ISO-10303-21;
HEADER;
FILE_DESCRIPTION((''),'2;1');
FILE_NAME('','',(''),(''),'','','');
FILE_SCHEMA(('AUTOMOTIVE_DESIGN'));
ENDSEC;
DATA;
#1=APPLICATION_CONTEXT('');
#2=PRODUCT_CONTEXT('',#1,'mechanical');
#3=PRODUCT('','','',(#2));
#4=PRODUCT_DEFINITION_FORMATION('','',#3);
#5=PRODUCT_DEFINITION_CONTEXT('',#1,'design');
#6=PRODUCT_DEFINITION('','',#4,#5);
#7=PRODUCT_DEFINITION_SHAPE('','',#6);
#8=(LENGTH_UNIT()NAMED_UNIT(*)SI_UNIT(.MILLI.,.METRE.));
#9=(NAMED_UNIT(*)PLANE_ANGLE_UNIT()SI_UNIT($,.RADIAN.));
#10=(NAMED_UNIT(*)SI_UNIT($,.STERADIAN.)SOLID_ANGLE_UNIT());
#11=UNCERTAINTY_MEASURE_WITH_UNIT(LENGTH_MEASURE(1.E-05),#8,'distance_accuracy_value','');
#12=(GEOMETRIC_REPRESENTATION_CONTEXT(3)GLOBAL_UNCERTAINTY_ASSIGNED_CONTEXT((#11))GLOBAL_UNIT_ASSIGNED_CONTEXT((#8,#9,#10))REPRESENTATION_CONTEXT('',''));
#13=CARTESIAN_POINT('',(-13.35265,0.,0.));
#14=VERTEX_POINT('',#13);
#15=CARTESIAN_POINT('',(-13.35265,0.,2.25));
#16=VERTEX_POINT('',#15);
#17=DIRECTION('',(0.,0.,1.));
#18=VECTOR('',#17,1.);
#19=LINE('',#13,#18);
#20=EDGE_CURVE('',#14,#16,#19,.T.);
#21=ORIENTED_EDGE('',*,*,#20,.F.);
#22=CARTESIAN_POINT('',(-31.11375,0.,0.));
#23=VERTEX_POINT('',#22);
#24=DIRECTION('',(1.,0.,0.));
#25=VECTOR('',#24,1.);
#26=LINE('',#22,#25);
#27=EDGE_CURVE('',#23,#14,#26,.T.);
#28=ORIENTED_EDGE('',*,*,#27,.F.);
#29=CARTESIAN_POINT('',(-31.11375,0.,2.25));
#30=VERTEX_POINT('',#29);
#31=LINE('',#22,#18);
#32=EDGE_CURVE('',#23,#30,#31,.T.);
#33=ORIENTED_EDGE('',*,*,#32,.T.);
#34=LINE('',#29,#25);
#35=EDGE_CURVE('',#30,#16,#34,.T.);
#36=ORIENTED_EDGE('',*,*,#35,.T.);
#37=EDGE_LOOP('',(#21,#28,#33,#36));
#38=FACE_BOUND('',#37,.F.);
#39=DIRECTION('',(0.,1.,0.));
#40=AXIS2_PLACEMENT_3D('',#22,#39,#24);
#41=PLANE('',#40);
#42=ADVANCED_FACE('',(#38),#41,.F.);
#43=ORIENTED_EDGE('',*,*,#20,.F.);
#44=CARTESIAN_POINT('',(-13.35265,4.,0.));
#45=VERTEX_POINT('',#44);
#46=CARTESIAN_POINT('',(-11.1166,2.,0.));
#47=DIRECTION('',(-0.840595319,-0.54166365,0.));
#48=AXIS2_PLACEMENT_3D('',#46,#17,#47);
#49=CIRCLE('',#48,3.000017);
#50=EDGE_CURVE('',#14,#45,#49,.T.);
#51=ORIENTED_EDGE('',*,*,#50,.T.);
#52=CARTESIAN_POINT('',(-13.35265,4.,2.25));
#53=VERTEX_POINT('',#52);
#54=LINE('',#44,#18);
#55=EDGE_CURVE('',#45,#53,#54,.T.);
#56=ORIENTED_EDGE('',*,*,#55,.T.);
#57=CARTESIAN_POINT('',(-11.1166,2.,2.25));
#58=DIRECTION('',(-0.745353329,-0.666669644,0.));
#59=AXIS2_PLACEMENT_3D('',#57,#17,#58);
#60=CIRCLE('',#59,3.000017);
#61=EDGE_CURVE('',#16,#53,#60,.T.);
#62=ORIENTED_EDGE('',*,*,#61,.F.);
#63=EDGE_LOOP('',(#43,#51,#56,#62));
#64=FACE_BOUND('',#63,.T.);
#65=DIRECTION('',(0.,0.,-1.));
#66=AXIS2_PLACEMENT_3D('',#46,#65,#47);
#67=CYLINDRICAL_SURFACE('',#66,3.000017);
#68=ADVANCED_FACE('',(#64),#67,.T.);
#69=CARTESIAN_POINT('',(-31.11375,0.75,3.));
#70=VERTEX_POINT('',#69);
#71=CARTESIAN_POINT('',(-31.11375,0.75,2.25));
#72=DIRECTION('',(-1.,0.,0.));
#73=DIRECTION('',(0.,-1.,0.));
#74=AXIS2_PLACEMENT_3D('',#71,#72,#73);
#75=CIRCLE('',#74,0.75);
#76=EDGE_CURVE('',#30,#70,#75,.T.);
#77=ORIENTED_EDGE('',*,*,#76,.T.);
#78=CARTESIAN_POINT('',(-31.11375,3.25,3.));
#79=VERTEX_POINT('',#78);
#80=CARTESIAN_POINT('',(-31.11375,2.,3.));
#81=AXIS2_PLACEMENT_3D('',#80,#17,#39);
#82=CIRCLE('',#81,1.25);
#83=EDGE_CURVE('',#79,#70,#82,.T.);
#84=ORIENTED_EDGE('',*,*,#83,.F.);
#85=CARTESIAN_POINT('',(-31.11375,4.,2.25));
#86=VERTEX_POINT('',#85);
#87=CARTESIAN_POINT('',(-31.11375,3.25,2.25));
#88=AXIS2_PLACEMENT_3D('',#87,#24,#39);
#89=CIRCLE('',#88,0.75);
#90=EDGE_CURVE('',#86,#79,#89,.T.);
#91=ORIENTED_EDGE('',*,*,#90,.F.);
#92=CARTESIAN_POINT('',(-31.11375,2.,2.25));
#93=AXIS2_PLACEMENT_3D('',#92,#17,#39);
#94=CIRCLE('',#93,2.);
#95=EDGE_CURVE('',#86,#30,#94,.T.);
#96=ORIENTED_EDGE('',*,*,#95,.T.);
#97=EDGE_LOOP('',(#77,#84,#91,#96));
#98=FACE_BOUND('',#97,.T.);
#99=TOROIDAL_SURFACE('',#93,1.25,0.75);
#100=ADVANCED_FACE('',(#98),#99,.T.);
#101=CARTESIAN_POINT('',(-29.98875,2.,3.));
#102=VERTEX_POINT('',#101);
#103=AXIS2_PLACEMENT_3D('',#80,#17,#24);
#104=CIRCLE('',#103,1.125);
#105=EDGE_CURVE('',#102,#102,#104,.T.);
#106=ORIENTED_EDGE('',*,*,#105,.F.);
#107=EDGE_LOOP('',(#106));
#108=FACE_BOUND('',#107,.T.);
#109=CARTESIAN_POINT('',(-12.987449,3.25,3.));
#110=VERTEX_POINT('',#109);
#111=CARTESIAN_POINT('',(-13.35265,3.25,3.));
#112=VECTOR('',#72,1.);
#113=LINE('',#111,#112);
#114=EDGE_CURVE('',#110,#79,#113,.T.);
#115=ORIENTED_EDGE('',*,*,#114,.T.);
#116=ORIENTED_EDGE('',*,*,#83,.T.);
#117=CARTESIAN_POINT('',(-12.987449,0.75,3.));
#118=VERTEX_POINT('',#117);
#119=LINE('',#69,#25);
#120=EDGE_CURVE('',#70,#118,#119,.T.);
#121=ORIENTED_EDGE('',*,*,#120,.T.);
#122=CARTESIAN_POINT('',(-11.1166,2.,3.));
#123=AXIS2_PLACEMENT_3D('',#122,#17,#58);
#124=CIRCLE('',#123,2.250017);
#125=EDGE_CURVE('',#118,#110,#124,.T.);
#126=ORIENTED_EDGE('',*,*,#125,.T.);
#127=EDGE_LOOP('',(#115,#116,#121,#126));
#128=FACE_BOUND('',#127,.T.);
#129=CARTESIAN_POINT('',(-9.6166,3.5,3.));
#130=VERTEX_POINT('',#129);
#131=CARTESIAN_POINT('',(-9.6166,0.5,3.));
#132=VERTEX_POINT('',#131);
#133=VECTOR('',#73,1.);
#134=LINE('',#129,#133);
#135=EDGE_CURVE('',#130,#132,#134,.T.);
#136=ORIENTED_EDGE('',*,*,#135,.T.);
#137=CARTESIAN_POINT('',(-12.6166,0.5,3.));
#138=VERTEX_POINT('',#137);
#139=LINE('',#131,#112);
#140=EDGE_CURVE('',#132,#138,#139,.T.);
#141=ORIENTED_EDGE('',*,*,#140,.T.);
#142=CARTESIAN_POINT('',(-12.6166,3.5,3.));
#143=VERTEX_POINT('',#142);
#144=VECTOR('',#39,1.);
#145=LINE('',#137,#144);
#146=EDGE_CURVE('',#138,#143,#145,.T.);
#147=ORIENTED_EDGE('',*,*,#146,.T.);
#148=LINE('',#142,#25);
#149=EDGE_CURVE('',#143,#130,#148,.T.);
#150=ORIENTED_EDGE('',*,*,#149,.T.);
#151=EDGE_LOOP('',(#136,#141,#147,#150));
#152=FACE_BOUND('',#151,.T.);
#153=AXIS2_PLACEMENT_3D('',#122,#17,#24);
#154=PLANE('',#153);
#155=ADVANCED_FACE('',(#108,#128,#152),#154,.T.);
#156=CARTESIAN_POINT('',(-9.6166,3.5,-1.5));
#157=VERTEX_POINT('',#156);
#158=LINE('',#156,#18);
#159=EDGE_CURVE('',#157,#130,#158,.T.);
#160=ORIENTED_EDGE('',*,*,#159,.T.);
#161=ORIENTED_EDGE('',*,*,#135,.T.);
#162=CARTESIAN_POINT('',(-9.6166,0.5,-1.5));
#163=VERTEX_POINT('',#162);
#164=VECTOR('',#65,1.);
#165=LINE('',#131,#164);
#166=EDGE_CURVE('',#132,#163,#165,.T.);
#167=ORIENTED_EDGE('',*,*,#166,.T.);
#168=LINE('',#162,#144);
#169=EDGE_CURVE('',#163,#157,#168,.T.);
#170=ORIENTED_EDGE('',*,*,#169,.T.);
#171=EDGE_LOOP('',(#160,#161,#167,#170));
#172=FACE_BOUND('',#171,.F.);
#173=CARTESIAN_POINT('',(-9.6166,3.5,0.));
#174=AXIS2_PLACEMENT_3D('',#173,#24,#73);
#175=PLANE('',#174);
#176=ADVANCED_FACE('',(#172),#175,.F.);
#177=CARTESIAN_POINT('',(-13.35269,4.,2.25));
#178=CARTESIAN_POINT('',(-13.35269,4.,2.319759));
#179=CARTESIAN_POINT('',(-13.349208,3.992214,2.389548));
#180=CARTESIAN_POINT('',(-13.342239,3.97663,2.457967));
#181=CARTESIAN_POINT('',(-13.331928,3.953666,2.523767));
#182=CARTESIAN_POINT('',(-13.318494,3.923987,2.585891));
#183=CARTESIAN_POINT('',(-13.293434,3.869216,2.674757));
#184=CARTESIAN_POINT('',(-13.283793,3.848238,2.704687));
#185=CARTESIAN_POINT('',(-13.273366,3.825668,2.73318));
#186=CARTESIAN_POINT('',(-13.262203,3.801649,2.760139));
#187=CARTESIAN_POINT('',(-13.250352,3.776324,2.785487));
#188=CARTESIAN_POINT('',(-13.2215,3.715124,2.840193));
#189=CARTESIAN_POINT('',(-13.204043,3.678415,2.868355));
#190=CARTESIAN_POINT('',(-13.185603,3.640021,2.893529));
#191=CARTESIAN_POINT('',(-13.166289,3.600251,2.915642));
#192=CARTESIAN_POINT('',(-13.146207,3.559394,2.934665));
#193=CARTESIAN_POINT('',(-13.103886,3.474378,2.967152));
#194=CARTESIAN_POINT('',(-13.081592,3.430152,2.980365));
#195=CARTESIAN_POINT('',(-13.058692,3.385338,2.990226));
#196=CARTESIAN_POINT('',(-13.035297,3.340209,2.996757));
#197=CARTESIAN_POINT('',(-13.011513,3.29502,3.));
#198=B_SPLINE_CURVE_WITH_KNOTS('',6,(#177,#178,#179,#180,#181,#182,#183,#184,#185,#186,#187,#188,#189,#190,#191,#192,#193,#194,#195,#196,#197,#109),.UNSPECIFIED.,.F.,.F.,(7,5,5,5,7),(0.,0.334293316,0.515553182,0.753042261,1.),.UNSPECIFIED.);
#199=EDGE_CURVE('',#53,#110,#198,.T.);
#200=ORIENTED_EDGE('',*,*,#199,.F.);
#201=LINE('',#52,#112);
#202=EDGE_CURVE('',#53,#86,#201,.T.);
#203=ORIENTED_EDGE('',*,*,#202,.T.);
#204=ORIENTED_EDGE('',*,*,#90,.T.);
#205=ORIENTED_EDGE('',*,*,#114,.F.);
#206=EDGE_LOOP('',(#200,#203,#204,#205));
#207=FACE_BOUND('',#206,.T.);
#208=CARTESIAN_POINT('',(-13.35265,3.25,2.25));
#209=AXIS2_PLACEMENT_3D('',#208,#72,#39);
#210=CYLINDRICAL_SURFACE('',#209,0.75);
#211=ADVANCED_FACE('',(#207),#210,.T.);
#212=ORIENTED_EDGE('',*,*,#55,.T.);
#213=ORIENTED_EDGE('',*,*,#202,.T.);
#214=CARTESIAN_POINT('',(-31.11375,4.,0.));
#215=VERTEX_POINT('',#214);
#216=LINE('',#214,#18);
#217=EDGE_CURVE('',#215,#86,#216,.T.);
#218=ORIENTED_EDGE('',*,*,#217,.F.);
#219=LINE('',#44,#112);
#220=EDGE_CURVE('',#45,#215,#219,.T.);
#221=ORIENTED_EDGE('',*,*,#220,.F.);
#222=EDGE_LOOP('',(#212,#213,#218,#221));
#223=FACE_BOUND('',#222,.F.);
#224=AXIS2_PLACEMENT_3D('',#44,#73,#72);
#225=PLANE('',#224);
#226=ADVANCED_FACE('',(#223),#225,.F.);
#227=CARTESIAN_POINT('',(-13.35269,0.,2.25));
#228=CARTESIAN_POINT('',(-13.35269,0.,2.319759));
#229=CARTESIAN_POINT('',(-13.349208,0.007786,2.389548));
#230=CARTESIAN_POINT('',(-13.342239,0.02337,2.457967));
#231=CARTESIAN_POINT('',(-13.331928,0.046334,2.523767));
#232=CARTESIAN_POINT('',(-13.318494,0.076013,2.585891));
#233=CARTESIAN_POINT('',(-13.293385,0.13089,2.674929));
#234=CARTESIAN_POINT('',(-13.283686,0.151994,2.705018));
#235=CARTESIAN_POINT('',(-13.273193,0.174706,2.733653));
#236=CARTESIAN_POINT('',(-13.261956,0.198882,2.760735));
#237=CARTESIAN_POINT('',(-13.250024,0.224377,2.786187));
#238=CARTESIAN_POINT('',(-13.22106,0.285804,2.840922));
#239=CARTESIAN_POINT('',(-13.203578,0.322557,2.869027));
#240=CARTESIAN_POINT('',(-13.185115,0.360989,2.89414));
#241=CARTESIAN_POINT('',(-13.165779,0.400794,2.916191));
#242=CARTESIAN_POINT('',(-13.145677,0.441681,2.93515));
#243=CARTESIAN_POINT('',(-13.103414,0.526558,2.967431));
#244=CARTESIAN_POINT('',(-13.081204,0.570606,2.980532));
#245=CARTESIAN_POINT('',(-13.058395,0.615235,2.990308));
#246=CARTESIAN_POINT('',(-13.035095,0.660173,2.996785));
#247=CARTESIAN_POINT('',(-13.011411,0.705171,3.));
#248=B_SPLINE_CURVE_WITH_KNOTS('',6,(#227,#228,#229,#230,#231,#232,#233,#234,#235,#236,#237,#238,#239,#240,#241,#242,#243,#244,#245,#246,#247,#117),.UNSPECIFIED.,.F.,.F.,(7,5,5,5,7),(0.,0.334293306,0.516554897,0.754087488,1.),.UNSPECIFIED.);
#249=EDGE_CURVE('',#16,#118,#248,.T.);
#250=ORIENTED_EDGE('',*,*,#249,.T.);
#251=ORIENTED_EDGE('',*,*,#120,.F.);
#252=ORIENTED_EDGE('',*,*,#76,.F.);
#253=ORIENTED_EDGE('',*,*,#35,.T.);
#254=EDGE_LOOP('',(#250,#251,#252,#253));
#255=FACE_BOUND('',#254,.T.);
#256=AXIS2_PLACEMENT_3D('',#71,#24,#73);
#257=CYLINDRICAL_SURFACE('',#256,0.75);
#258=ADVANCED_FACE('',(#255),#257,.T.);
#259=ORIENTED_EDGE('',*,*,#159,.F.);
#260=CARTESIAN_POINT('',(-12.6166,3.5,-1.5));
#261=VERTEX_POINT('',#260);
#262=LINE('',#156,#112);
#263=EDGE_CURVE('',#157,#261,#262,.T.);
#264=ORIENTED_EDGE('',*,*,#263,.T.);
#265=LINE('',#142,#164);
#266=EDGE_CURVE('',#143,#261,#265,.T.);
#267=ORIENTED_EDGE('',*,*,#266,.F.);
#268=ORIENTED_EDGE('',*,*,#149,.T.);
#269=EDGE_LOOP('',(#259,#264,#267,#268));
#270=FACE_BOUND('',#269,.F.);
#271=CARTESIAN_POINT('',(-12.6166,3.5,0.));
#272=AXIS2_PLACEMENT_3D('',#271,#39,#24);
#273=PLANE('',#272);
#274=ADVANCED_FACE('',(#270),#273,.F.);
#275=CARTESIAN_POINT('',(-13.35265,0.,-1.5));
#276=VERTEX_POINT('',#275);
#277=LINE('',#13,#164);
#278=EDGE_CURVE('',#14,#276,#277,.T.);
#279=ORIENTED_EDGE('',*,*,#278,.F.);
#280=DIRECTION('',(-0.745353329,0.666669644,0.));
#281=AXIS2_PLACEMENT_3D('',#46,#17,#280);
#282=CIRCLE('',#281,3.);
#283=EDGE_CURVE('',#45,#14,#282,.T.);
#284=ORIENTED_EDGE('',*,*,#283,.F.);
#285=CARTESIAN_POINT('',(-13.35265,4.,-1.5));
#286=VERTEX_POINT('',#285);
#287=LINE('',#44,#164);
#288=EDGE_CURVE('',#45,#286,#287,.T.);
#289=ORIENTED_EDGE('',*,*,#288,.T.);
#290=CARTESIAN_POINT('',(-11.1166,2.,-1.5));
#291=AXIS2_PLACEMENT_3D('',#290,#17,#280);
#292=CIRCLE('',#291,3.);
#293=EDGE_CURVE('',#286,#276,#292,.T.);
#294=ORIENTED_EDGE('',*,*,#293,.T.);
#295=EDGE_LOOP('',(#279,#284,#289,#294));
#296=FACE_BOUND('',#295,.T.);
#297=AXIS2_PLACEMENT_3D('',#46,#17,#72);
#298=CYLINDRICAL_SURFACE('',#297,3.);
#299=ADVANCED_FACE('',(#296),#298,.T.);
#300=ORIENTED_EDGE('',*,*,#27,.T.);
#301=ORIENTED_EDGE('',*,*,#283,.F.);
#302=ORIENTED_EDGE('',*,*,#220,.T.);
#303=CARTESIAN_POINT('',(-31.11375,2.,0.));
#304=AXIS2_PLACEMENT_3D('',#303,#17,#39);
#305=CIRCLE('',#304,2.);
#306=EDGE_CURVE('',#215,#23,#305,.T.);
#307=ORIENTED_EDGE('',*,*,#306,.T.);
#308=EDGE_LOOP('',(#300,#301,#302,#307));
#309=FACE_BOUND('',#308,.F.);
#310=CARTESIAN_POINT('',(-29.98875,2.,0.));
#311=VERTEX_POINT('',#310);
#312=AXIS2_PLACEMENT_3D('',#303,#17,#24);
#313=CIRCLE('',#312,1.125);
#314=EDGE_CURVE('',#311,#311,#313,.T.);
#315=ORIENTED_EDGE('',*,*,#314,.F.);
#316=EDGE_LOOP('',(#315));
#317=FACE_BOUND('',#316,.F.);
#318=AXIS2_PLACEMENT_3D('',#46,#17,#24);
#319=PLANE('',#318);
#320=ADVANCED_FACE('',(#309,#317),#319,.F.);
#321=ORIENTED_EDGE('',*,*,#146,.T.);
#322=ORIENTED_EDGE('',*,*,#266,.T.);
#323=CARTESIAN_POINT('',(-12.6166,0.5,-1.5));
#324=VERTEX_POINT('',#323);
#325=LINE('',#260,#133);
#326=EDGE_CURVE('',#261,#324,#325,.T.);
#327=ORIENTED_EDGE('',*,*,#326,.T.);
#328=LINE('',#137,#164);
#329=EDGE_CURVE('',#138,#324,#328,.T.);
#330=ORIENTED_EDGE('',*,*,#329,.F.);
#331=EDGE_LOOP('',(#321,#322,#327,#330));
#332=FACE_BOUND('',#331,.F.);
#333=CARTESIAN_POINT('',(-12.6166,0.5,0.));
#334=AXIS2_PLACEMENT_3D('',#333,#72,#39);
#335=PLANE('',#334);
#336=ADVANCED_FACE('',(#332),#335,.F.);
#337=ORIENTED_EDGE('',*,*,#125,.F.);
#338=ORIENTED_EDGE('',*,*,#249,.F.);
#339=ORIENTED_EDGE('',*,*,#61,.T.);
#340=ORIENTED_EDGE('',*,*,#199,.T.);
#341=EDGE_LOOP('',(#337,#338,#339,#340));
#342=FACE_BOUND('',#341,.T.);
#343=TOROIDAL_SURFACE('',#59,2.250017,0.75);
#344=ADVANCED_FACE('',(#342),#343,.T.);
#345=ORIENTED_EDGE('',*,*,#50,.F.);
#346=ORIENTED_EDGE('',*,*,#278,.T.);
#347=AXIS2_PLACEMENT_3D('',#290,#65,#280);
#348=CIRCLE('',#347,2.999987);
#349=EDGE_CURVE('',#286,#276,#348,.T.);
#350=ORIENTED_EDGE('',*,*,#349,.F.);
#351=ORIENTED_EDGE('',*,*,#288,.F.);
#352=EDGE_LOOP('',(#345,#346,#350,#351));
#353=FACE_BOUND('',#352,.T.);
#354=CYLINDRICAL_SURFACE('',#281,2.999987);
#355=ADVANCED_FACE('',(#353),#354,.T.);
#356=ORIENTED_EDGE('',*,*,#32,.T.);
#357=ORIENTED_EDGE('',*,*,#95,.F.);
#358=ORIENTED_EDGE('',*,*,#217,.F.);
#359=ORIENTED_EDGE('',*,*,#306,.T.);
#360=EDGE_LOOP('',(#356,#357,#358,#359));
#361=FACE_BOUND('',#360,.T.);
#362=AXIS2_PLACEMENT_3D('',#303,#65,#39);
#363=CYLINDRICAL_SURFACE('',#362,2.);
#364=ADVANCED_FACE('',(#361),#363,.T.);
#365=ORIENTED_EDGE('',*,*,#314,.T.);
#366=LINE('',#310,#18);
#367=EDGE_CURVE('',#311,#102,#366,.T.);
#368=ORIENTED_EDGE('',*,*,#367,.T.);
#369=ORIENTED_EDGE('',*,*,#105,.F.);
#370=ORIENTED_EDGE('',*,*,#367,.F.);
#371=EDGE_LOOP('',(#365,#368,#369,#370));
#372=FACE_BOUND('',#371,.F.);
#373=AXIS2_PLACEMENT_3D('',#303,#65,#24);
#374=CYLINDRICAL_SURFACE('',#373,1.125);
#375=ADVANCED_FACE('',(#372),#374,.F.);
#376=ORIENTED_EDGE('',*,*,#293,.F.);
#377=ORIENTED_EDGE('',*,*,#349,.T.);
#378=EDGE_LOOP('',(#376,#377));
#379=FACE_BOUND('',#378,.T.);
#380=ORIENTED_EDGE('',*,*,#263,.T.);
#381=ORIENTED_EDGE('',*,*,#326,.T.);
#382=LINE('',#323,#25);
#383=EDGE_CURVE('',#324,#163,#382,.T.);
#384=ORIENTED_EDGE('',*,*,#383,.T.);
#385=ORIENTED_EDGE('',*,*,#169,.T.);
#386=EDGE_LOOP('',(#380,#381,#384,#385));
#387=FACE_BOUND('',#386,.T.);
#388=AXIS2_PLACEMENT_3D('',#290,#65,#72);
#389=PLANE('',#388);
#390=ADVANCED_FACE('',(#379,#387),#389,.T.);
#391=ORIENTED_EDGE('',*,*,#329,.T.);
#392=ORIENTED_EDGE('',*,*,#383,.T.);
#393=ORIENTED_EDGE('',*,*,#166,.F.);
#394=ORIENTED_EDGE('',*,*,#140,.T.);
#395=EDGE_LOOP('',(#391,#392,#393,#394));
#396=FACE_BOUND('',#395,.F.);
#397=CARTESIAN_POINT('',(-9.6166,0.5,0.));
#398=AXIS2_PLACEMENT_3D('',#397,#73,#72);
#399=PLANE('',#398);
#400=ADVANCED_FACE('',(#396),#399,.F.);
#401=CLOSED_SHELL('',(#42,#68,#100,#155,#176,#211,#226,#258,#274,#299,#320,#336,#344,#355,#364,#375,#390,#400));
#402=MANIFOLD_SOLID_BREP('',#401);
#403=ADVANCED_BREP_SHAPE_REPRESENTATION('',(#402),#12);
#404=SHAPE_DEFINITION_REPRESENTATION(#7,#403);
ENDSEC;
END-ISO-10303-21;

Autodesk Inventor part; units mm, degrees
ref_plane "YZ Plane" through (0, 0, 0) normal (1, 0, 0) x (0, 1, 0)
ref_plane "XZ Plane" through (0, 0, 0) normal (0, 1, 0) x (-1, 0, 0)
ref_plane "XY Plane" through (0, 0, 0) normal (0, 0, 1) x (1, 0, 0)
sketch "Sketch1" plane through (0, 0, 0) normal (0, 0, 1) x (1, 0, 0)
  circle A0 centre (-39.9943, 0) radius 2.25
  arc A1 (-5.0436, -3.25) -> (-5.0436, 3.25) centre (0, 0) ccw
  line L0 (3, 3) -> (3, -3)
  line L1 (3, -3) -> (-3, -3)
  line L2 (-3, -3) -> (-3, 3)
  line L3 (-3, 3) -> (3, 3)
  line L4 (-3, 3) -> (3, 3)
  line L5 (-3, -3) -> (3, -3)
  line L6 (-39.9943, -4) -> (-4.4721, -4)
  line L7 (-4.4721, 4) -> (-39.9943, 4)
  arc A2 (-39.9943, 4) -> (-39.9943, -4) centre (-39.9943, 0) ccw
  point P0 (0, 3)
  point P1 (-19.9972, 0)
extrude "Extrusion1" add sketch "Sketch1" along normal blind 6
sketch "Sketch5" plane through (0, 0, 0) normal (0, 0, -1) x (-1, 0, 0)
  circle A0 centre (0, 0) radius 6
  arc A1 (4.4721, 4) -> (4.4721, -4) centre (0, 0) ccw projected
  line L0 (-3, -3) -> (-3, 3)
  line L1 (-3, 3) -> (3, 3)
  line L2 (3, 3) -> (3, -3)
  line L3 (3, -3) -> (-3, -3)
  point P0 (2.804, -2.804)
  point P1 (5.0436, -3.25)
  point P2 (5.0436, 3.25)
  point P3 (0, -3)
extrude "Extrusion5" add sketch "Sketch5" along normal blind 3
fillet "Fillet2" radius 1.5 4 edges at (-22.2332, -4, 6) (-43.9943, 0, 6) (-22.2332, 4, 6) (6, 0, 6)
scale "Scale1" factors (0.5, 0.5, 0.5) then translate (-11.1166, 2, 0) bodies 1
properties part number "crankshaft"
